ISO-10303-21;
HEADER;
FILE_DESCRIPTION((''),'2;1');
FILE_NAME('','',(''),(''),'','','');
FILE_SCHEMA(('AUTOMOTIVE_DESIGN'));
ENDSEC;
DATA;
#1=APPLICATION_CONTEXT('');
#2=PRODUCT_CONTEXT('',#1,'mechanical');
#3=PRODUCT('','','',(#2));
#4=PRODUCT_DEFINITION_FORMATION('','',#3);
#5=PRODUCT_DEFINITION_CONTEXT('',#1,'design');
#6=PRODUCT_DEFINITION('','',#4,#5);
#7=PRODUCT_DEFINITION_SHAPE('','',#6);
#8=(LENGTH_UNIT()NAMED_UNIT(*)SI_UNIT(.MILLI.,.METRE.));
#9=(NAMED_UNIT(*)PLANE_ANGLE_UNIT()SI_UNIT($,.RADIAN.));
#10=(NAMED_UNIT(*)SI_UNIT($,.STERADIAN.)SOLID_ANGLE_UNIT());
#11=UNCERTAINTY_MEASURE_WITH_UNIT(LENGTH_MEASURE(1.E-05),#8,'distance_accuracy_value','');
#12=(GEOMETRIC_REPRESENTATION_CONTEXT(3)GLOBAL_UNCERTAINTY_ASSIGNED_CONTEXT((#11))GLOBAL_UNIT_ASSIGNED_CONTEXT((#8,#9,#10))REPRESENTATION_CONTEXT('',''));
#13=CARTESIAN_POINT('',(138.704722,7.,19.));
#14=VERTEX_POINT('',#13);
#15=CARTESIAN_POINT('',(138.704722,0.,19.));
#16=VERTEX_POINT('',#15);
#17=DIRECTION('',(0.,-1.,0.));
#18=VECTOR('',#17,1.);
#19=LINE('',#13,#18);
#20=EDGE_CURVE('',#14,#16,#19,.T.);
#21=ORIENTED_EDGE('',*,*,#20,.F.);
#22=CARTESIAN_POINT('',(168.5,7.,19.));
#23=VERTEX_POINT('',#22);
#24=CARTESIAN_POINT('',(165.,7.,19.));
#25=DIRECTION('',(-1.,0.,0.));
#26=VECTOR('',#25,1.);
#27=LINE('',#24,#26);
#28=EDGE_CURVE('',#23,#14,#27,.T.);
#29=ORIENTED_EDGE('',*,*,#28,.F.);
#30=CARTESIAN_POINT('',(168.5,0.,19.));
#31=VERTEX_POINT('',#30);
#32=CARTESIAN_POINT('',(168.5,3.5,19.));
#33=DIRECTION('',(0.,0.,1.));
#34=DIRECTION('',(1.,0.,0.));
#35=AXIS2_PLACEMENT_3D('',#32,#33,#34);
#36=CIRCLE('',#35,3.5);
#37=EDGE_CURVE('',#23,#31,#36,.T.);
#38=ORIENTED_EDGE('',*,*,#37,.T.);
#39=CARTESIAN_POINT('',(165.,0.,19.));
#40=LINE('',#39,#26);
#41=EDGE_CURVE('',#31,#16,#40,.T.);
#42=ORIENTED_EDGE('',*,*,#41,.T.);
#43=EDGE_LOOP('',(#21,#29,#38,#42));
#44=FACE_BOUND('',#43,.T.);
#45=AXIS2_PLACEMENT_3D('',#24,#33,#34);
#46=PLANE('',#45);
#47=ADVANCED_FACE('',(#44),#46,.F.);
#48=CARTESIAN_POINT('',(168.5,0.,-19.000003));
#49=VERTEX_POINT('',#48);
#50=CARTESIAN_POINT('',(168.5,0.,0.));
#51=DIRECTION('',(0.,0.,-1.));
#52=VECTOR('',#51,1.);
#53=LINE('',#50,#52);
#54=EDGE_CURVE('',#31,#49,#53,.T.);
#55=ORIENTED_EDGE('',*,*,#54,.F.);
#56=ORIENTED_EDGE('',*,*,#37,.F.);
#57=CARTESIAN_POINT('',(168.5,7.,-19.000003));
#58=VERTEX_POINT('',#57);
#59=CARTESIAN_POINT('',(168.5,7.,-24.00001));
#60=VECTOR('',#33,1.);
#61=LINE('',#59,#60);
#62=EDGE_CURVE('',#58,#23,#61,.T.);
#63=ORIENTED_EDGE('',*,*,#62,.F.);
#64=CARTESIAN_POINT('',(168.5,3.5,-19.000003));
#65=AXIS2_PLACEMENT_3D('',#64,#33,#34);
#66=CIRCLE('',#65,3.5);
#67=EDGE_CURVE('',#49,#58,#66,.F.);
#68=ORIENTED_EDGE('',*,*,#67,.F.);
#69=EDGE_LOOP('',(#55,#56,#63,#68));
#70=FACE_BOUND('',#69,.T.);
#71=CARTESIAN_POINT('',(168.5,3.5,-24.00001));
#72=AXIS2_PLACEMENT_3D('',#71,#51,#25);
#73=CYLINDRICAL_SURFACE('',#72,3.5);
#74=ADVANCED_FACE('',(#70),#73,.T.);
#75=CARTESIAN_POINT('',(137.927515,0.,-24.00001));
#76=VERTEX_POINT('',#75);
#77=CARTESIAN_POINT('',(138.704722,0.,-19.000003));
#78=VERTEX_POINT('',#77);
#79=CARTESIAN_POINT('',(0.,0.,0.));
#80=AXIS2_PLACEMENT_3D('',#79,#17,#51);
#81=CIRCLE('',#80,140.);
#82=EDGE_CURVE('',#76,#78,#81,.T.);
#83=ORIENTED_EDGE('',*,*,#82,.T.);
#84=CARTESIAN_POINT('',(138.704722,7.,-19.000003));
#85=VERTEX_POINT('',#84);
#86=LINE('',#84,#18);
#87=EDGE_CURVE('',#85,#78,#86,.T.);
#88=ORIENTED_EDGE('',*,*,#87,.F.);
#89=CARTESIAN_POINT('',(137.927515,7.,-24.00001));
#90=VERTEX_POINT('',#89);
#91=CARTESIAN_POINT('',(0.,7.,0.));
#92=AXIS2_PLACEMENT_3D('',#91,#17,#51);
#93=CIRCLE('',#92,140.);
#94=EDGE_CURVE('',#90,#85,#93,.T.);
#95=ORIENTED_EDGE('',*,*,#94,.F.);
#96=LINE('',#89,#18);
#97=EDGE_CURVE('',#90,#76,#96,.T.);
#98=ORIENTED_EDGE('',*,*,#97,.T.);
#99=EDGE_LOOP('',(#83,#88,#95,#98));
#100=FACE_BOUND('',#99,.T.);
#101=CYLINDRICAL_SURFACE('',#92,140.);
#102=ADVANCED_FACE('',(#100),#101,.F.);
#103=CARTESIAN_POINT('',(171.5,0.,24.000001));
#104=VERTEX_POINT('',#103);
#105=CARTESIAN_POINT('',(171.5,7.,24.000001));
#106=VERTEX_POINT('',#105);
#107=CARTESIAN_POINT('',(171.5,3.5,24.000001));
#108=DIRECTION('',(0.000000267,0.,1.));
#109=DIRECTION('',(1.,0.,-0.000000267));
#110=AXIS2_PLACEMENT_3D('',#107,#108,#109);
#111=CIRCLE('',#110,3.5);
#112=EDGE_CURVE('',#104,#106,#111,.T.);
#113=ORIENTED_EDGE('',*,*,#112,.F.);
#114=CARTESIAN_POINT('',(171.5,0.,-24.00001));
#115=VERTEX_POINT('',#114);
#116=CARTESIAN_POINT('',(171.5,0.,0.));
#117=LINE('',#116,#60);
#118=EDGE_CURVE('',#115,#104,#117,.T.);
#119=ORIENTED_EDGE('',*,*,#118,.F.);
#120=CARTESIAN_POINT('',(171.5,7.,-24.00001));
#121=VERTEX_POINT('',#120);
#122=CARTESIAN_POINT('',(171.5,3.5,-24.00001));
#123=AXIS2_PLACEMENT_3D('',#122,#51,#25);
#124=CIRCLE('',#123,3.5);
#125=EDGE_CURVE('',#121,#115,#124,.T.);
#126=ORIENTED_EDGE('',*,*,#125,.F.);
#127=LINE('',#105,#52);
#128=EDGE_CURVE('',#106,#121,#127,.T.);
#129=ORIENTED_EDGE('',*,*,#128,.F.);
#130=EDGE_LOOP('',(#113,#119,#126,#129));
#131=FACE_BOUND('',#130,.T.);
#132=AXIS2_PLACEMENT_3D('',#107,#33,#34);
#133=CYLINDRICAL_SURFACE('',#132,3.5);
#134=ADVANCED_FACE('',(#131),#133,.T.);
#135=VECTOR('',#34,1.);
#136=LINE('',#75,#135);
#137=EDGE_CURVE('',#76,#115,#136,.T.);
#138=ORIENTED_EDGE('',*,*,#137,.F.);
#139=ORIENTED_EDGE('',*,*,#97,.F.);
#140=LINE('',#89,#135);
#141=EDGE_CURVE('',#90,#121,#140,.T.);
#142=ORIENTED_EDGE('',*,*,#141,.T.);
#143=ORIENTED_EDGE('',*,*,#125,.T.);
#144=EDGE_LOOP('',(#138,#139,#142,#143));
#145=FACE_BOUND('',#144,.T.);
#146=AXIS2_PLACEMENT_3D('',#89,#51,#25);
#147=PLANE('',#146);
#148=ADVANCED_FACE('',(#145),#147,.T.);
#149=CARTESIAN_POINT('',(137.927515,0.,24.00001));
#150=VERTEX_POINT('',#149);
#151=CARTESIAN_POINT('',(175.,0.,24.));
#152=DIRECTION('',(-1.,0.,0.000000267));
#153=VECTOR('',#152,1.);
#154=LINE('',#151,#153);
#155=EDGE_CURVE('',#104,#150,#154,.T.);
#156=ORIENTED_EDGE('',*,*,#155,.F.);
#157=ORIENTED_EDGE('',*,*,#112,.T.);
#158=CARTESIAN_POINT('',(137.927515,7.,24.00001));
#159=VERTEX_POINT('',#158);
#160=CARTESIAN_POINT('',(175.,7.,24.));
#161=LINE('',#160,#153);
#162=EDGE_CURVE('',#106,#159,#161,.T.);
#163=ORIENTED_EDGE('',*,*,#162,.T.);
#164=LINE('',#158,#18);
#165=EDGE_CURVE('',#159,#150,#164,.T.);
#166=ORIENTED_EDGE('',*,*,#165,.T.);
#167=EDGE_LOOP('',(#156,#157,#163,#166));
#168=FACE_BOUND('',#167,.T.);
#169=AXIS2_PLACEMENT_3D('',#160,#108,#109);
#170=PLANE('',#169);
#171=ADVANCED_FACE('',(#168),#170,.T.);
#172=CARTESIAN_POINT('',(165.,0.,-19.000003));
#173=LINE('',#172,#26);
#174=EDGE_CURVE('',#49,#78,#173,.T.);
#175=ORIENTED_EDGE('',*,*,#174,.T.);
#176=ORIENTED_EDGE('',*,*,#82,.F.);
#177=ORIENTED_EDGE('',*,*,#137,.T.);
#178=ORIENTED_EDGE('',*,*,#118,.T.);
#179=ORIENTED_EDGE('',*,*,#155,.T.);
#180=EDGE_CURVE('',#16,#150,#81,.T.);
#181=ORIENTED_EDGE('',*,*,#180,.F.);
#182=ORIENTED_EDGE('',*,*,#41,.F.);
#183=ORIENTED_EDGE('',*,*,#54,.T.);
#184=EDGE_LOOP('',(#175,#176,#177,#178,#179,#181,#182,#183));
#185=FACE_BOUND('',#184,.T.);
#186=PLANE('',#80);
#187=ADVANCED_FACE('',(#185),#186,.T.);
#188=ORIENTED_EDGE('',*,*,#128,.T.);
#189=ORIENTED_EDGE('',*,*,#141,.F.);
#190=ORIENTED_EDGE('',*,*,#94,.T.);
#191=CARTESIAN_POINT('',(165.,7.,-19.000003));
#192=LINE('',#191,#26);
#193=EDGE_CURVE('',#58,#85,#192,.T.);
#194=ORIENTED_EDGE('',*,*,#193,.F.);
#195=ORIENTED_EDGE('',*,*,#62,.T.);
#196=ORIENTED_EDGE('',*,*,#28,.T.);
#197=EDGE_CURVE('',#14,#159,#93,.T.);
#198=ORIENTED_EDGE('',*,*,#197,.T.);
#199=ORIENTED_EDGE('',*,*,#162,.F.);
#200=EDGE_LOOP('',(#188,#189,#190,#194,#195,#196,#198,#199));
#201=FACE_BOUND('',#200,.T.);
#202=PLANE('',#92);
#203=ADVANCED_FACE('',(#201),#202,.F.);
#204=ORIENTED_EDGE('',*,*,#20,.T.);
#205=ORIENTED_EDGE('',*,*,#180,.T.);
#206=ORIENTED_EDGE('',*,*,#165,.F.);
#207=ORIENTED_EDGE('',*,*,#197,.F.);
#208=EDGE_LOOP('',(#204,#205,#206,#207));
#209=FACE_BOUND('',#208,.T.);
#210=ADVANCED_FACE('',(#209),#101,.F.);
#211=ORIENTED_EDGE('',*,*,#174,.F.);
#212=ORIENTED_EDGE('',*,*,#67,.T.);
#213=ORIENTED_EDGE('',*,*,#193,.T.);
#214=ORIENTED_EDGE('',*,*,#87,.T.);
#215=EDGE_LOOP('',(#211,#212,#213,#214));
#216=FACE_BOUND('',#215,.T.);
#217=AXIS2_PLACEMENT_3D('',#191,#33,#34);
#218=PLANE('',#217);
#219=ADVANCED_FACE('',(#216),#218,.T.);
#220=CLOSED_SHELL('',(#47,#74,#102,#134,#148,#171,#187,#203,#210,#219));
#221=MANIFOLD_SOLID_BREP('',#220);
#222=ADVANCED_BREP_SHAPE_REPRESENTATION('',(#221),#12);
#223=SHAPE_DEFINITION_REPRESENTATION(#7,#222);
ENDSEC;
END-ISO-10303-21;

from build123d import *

# Parameters (mm, degrees)
BOSS_EXTRUDE1_DEPTH = 7
FILLET1_START       = -25
FILLET1_DEPTH       = 50
FILLET2_RADIUS      = 3.5
FILLET2_LENGTH      = 38.000003375


with BuildPart() as part:
    # Sketch1 → Boss-Extrude1 (new body)
    with BuildSketch(Plane(origin=(0, 0, 0), x_dir=(1, 0, 0), z_dir=(0, 1, 0))):
        with BuildLine():
            Line((137.927515414, 24.000010242), (175, 24.000010242))
            Line((175, 24.000010242), (175, -24))
            Line((175, -24), (137.927515472, -24.000009912))
            ThreePointArc((137.927515472, -24.000009912), (138.338710325, -21.50351659), (138.704722342, -19))
            Line((138.704722342, -19), (165, -19))
            Line((165, -19), (165, 19.000003375))
            Line((165, 19.000003375), (138.70472188, 19.000003375))
            ThreePointArc((138.70472188, 19.000003375), (138.338710037, 21.503518438), (137.927515414, 24.000010242))
        make_face()
    extrude(amount=BOSS_EXTRUDE1_DEPTH)

    # Fillet1: read off the stored shape, not the designer's step
    # Fillet1 outline → Fillet1 (cut)
    with BuildSketch(Plane.XY.offset(FILLET1_START)):
        with BuildLine():
            ThreePointArc((171.5, 7), (173.974873734, 5.974873734), (175, 3.5))
            Line((175, 3.5), (175, 7))
            Line((175, 7), (171.5, 7))
        make_face()
        with BuildLine():
            ThreePointArc((175, 3.5), (173.974873734, 1.025126266), (171.5, 0))
            Line((171.5, 0), (175, 0))
            Line((175, 0), (175, 3.5))
        make_face()
    extrude(amount=FILLET1_DEPTH, mode=Mode.SUBTRACT)

    # Fillet2: full round fillet: the end face becomes a half cylinder, R = half its width
    fillet2_face = Plane((165, 3.5, -1.687e-06), x_dir=(0, 0, 1), z_dir=(-1, 0, 0))  # on the end face: x along it, z out of the body
    fillet2_slab = fillet2_face.offset(-FILLET2_RADIUS / 2) * Box(FILLET2_LENGTH, 2 * FILLET2_RADIUS, FILLET2_RADIUS, mode=Mode.PRIVATE)  # the body's end, R deep
    fillet2_round = Plane((168.5, 3.5, -1.687e-06), x_dir=(-1, 0, 0), z_dir=(0, 0, 1)) * Cylinder(FILLET2_RADIUS, FILLET2_LENGTH, mode=Mode.PRIVATE)  # its axis R under the face
    add(fillet2_slab - fillet2_round, mode=Mode.SUBTRACT)


solid = part.part
